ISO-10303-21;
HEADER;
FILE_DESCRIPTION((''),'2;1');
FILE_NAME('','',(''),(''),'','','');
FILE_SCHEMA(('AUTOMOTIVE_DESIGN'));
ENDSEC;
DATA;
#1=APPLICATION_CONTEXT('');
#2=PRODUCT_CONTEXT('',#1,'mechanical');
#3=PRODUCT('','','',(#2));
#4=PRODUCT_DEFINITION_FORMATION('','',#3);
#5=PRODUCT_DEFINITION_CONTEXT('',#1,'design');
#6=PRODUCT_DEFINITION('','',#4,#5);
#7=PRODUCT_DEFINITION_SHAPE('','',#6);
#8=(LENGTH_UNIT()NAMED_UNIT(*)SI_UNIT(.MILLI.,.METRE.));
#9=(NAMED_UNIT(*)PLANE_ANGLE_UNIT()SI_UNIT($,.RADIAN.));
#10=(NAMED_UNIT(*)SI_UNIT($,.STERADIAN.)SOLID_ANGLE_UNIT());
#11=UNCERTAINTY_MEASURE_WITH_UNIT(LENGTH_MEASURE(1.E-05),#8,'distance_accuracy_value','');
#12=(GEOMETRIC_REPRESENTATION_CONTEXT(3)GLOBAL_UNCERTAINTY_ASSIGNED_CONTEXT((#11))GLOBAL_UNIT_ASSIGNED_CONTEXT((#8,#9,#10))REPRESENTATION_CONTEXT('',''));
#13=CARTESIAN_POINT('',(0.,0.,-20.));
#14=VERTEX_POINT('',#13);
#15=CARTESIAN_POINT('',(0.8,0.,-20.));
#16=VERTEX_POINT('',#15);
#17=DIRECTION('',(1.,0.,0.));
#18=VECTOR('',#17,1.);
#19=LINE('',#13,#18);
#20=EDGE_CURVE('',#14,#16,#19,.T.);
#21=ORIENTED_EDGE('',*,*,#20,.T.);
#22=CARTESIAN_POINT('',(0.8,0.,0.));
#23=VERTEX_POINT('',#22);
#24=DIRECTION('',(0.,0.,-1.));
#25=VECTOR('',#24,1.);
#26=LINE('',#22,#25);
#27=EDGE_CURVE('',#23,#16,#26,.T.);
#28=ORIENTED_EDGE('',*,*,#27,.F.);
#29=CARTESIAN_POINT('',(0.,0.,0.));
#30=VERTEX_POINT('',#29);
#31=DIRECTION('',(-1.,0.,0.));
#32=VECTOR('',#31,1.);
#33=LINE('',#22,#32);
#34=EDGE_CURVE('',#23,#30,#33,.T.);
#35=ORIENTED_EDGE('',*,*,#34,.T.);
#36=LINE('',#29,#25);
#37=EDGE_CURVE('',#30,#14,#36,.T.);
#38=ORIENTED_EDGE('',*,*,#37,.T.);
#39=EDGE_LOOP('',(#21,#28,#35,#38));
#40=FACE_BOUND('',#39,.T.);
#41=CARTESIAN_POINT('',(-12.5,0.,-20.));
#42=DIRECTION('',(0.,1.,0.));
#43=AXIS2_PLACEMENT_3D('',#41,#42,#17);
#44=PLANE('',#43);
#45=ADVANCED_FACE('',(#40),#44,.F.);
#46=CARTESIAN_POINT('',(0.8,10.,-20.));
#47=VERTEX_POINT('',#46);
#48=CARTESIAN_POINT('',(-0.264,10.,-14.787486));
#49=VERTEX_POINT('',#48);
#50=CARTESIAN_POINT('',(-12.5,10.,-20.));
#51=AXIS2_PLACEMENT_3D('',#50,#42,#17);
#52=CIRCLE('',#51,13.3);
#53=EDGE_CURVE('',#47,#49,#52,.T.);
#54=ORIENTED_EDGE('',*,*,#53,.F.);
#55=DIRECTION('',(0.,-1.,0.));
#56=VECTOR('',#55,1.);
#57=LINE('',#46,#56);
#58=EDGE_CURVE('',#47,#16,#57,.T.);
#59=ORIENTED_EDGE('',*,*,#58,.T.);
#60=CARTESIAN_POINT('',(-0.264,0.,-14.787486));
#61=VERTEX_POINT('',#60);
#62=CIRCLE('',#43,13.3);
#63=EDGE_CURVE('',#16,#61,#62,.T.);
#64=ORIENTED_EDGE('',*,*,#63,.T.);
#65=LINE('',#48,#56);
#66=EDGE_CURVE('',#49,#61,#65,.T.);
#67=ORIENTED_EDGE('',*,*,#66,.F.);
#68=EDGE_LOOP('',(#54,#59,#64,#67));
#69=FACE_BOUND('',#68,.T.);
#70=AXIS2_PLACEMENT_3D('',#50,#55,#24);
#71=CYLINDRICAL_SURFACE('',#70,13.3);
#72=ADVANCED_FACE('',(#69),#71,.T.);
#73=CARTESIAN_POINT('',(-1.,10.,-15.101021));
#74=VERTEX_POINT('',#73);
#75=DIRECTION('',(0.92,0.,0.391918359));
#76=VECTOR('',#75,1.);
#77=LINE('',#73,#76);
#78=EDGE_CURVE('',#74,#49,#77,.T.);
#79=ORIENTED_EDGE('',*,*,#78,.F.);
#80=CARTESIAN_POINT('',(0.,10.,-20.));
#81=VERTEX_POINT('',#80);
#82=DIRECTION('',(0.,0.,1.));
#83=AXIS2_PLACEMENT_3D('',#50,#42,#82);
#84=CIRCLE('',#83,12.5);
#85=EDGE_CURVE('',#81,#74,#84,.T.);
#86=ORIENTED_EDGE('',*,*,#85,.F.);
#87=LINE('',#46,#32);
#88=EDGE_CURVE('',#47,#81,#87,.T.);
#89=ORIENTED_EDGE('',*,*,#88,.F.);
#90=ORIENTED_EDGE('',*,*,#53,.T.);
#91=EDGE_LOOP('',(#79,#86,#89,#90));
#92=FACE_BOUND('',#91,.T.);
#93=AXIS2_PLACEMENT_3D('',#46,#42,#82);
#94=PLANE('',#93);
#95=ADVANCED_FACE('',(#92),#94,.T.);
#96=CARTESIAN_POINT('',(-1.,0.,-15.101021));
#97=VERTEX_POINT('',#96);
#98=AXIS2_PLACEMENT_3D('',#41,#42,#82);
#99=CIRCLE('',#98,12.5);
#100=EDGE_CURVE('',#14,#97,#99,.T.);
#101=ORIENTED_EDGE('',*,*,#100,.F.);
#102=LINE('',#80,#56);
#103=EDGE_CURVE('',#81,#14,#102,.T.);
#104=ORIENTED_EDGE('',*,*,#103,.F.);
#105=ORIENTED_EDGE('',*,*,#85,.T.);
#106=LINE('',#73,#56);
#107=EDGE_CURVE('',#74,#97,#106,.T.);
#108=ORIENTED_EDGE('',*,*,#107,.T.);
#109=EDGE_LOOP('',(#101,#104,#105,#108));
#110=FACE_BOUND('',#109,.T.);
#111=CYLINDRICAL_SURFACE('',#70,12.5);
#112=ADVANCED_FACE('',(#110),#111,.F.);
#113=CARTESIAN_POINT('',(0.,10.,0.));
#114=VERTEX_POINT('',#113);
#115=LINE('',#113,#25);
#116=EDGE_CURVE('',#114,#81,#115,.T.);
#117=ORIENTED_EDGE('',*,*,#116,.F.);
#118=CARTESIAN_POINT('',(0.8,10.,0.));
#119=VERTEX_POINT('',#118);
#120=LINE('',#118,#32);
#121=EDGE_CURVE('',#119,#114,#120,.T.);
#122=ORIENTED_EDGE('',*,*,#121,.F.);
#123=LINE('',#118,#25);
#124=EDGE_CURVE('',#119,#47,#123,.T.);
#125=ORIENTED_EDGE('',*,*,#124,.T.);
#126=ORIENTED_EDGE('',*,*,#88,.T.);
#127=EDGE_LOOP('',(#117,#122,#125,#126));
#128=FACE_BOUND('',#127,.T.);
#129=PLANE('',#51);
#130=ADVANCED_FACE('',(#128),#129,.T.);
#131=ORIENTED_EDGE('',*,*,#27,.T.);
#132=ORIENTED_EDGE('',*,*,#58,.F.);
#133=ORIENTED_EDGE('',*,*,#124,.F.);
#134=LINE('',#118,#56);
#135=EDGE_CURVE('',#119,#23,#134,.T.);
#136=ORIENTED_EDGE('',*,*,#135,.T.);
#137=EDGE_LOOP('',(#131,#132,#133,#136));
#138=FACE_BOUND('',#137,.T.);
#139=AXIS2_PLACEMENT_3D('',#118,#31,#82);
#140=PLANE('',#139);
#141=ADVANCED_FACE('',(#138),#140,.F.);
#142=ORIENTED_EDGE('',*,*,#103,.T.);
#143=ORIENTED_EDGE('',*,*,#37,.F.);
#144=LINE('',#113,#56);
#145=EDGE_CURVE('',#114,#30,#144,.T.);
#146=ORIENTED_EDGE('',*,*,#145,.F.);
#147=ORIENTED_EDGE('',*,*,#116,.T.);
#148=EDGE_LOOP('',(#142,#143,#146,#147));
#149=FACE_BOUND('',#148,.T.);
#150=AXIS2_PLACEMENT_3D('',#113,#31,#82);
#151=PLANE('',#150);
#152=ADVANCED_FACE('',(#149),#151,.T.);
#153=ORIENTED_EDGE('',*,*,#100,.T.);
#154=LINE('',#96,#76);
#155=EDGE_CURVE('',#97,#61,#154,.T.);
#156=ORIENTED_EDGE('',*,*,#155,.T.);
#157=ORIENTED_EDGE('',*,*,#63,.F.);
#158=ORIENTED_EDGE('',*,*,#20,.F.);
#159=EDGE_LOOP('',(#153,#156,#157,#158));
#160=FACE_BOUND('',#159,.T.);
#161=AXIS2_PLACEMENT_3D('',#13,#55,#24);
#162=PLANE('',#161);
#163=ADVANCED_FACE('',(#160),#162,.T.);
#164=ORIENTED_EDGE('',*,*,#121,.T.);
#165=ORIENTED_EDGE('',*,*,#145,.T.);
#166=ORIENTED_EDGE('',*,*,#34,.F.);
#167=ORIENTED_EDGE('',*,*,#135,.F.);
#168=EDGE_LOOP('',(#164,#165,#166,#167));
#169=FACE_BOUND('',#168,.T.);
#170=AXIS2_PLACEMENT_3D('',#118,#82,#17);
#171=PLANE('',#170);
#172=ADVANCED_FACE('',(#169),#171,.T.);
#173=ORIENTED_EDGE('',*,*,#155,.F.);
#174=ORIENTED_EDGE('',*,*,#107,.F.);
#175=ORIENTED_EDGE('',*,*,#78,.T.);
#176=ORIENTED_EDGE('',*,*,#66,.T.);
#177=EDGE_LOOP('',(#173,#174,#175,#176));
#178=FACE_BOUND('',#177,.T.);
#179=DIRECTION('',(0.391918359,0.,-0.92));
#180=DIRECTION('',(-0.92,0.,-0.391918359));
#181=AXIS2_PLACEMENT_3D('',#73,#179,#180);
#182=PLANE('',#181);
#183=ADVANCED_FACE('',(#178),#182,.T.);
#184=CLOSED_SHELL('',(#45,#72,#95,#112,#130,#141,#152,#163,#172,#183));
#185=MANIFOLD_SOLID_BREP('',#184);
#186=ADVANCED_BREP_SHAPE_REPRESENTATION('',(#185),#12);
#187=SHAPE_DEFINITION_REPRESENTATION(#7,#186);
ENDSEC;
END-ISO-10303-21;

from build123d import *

# Parameters (mm, degrees)
BASE_FLANGE1_DEPTH = 10


# Sheet-metal steps are written as plain solids
with BuildPart() as part:
    # Sketch1 → Base-Flange1 (new body)
    with BuildSketch(Plane(origin=(0, 0, 0), x_dir=(1, 0, 0), z_dir=(0, 1, 0))):
        with BuildLine():
            Line((0, 0), (0, 20))
            ThreePointArc((0, 20), (-24.747448714, 22.5), (-1, 15.101020514))
            Line((-1, 15.101020514), (-0.264, 14.787485827))
            ThreePointArc((-0.264, 14.787485827), (-25.531285432, 22.66), (0.8, 20))
            Line((0.8, 20), (0.8, 0))
            Line((0.8, 0), (0, 0))
        make_face()
    extrude(amount=BASE_FLANGE1_DEPTH)


solid = part.part
